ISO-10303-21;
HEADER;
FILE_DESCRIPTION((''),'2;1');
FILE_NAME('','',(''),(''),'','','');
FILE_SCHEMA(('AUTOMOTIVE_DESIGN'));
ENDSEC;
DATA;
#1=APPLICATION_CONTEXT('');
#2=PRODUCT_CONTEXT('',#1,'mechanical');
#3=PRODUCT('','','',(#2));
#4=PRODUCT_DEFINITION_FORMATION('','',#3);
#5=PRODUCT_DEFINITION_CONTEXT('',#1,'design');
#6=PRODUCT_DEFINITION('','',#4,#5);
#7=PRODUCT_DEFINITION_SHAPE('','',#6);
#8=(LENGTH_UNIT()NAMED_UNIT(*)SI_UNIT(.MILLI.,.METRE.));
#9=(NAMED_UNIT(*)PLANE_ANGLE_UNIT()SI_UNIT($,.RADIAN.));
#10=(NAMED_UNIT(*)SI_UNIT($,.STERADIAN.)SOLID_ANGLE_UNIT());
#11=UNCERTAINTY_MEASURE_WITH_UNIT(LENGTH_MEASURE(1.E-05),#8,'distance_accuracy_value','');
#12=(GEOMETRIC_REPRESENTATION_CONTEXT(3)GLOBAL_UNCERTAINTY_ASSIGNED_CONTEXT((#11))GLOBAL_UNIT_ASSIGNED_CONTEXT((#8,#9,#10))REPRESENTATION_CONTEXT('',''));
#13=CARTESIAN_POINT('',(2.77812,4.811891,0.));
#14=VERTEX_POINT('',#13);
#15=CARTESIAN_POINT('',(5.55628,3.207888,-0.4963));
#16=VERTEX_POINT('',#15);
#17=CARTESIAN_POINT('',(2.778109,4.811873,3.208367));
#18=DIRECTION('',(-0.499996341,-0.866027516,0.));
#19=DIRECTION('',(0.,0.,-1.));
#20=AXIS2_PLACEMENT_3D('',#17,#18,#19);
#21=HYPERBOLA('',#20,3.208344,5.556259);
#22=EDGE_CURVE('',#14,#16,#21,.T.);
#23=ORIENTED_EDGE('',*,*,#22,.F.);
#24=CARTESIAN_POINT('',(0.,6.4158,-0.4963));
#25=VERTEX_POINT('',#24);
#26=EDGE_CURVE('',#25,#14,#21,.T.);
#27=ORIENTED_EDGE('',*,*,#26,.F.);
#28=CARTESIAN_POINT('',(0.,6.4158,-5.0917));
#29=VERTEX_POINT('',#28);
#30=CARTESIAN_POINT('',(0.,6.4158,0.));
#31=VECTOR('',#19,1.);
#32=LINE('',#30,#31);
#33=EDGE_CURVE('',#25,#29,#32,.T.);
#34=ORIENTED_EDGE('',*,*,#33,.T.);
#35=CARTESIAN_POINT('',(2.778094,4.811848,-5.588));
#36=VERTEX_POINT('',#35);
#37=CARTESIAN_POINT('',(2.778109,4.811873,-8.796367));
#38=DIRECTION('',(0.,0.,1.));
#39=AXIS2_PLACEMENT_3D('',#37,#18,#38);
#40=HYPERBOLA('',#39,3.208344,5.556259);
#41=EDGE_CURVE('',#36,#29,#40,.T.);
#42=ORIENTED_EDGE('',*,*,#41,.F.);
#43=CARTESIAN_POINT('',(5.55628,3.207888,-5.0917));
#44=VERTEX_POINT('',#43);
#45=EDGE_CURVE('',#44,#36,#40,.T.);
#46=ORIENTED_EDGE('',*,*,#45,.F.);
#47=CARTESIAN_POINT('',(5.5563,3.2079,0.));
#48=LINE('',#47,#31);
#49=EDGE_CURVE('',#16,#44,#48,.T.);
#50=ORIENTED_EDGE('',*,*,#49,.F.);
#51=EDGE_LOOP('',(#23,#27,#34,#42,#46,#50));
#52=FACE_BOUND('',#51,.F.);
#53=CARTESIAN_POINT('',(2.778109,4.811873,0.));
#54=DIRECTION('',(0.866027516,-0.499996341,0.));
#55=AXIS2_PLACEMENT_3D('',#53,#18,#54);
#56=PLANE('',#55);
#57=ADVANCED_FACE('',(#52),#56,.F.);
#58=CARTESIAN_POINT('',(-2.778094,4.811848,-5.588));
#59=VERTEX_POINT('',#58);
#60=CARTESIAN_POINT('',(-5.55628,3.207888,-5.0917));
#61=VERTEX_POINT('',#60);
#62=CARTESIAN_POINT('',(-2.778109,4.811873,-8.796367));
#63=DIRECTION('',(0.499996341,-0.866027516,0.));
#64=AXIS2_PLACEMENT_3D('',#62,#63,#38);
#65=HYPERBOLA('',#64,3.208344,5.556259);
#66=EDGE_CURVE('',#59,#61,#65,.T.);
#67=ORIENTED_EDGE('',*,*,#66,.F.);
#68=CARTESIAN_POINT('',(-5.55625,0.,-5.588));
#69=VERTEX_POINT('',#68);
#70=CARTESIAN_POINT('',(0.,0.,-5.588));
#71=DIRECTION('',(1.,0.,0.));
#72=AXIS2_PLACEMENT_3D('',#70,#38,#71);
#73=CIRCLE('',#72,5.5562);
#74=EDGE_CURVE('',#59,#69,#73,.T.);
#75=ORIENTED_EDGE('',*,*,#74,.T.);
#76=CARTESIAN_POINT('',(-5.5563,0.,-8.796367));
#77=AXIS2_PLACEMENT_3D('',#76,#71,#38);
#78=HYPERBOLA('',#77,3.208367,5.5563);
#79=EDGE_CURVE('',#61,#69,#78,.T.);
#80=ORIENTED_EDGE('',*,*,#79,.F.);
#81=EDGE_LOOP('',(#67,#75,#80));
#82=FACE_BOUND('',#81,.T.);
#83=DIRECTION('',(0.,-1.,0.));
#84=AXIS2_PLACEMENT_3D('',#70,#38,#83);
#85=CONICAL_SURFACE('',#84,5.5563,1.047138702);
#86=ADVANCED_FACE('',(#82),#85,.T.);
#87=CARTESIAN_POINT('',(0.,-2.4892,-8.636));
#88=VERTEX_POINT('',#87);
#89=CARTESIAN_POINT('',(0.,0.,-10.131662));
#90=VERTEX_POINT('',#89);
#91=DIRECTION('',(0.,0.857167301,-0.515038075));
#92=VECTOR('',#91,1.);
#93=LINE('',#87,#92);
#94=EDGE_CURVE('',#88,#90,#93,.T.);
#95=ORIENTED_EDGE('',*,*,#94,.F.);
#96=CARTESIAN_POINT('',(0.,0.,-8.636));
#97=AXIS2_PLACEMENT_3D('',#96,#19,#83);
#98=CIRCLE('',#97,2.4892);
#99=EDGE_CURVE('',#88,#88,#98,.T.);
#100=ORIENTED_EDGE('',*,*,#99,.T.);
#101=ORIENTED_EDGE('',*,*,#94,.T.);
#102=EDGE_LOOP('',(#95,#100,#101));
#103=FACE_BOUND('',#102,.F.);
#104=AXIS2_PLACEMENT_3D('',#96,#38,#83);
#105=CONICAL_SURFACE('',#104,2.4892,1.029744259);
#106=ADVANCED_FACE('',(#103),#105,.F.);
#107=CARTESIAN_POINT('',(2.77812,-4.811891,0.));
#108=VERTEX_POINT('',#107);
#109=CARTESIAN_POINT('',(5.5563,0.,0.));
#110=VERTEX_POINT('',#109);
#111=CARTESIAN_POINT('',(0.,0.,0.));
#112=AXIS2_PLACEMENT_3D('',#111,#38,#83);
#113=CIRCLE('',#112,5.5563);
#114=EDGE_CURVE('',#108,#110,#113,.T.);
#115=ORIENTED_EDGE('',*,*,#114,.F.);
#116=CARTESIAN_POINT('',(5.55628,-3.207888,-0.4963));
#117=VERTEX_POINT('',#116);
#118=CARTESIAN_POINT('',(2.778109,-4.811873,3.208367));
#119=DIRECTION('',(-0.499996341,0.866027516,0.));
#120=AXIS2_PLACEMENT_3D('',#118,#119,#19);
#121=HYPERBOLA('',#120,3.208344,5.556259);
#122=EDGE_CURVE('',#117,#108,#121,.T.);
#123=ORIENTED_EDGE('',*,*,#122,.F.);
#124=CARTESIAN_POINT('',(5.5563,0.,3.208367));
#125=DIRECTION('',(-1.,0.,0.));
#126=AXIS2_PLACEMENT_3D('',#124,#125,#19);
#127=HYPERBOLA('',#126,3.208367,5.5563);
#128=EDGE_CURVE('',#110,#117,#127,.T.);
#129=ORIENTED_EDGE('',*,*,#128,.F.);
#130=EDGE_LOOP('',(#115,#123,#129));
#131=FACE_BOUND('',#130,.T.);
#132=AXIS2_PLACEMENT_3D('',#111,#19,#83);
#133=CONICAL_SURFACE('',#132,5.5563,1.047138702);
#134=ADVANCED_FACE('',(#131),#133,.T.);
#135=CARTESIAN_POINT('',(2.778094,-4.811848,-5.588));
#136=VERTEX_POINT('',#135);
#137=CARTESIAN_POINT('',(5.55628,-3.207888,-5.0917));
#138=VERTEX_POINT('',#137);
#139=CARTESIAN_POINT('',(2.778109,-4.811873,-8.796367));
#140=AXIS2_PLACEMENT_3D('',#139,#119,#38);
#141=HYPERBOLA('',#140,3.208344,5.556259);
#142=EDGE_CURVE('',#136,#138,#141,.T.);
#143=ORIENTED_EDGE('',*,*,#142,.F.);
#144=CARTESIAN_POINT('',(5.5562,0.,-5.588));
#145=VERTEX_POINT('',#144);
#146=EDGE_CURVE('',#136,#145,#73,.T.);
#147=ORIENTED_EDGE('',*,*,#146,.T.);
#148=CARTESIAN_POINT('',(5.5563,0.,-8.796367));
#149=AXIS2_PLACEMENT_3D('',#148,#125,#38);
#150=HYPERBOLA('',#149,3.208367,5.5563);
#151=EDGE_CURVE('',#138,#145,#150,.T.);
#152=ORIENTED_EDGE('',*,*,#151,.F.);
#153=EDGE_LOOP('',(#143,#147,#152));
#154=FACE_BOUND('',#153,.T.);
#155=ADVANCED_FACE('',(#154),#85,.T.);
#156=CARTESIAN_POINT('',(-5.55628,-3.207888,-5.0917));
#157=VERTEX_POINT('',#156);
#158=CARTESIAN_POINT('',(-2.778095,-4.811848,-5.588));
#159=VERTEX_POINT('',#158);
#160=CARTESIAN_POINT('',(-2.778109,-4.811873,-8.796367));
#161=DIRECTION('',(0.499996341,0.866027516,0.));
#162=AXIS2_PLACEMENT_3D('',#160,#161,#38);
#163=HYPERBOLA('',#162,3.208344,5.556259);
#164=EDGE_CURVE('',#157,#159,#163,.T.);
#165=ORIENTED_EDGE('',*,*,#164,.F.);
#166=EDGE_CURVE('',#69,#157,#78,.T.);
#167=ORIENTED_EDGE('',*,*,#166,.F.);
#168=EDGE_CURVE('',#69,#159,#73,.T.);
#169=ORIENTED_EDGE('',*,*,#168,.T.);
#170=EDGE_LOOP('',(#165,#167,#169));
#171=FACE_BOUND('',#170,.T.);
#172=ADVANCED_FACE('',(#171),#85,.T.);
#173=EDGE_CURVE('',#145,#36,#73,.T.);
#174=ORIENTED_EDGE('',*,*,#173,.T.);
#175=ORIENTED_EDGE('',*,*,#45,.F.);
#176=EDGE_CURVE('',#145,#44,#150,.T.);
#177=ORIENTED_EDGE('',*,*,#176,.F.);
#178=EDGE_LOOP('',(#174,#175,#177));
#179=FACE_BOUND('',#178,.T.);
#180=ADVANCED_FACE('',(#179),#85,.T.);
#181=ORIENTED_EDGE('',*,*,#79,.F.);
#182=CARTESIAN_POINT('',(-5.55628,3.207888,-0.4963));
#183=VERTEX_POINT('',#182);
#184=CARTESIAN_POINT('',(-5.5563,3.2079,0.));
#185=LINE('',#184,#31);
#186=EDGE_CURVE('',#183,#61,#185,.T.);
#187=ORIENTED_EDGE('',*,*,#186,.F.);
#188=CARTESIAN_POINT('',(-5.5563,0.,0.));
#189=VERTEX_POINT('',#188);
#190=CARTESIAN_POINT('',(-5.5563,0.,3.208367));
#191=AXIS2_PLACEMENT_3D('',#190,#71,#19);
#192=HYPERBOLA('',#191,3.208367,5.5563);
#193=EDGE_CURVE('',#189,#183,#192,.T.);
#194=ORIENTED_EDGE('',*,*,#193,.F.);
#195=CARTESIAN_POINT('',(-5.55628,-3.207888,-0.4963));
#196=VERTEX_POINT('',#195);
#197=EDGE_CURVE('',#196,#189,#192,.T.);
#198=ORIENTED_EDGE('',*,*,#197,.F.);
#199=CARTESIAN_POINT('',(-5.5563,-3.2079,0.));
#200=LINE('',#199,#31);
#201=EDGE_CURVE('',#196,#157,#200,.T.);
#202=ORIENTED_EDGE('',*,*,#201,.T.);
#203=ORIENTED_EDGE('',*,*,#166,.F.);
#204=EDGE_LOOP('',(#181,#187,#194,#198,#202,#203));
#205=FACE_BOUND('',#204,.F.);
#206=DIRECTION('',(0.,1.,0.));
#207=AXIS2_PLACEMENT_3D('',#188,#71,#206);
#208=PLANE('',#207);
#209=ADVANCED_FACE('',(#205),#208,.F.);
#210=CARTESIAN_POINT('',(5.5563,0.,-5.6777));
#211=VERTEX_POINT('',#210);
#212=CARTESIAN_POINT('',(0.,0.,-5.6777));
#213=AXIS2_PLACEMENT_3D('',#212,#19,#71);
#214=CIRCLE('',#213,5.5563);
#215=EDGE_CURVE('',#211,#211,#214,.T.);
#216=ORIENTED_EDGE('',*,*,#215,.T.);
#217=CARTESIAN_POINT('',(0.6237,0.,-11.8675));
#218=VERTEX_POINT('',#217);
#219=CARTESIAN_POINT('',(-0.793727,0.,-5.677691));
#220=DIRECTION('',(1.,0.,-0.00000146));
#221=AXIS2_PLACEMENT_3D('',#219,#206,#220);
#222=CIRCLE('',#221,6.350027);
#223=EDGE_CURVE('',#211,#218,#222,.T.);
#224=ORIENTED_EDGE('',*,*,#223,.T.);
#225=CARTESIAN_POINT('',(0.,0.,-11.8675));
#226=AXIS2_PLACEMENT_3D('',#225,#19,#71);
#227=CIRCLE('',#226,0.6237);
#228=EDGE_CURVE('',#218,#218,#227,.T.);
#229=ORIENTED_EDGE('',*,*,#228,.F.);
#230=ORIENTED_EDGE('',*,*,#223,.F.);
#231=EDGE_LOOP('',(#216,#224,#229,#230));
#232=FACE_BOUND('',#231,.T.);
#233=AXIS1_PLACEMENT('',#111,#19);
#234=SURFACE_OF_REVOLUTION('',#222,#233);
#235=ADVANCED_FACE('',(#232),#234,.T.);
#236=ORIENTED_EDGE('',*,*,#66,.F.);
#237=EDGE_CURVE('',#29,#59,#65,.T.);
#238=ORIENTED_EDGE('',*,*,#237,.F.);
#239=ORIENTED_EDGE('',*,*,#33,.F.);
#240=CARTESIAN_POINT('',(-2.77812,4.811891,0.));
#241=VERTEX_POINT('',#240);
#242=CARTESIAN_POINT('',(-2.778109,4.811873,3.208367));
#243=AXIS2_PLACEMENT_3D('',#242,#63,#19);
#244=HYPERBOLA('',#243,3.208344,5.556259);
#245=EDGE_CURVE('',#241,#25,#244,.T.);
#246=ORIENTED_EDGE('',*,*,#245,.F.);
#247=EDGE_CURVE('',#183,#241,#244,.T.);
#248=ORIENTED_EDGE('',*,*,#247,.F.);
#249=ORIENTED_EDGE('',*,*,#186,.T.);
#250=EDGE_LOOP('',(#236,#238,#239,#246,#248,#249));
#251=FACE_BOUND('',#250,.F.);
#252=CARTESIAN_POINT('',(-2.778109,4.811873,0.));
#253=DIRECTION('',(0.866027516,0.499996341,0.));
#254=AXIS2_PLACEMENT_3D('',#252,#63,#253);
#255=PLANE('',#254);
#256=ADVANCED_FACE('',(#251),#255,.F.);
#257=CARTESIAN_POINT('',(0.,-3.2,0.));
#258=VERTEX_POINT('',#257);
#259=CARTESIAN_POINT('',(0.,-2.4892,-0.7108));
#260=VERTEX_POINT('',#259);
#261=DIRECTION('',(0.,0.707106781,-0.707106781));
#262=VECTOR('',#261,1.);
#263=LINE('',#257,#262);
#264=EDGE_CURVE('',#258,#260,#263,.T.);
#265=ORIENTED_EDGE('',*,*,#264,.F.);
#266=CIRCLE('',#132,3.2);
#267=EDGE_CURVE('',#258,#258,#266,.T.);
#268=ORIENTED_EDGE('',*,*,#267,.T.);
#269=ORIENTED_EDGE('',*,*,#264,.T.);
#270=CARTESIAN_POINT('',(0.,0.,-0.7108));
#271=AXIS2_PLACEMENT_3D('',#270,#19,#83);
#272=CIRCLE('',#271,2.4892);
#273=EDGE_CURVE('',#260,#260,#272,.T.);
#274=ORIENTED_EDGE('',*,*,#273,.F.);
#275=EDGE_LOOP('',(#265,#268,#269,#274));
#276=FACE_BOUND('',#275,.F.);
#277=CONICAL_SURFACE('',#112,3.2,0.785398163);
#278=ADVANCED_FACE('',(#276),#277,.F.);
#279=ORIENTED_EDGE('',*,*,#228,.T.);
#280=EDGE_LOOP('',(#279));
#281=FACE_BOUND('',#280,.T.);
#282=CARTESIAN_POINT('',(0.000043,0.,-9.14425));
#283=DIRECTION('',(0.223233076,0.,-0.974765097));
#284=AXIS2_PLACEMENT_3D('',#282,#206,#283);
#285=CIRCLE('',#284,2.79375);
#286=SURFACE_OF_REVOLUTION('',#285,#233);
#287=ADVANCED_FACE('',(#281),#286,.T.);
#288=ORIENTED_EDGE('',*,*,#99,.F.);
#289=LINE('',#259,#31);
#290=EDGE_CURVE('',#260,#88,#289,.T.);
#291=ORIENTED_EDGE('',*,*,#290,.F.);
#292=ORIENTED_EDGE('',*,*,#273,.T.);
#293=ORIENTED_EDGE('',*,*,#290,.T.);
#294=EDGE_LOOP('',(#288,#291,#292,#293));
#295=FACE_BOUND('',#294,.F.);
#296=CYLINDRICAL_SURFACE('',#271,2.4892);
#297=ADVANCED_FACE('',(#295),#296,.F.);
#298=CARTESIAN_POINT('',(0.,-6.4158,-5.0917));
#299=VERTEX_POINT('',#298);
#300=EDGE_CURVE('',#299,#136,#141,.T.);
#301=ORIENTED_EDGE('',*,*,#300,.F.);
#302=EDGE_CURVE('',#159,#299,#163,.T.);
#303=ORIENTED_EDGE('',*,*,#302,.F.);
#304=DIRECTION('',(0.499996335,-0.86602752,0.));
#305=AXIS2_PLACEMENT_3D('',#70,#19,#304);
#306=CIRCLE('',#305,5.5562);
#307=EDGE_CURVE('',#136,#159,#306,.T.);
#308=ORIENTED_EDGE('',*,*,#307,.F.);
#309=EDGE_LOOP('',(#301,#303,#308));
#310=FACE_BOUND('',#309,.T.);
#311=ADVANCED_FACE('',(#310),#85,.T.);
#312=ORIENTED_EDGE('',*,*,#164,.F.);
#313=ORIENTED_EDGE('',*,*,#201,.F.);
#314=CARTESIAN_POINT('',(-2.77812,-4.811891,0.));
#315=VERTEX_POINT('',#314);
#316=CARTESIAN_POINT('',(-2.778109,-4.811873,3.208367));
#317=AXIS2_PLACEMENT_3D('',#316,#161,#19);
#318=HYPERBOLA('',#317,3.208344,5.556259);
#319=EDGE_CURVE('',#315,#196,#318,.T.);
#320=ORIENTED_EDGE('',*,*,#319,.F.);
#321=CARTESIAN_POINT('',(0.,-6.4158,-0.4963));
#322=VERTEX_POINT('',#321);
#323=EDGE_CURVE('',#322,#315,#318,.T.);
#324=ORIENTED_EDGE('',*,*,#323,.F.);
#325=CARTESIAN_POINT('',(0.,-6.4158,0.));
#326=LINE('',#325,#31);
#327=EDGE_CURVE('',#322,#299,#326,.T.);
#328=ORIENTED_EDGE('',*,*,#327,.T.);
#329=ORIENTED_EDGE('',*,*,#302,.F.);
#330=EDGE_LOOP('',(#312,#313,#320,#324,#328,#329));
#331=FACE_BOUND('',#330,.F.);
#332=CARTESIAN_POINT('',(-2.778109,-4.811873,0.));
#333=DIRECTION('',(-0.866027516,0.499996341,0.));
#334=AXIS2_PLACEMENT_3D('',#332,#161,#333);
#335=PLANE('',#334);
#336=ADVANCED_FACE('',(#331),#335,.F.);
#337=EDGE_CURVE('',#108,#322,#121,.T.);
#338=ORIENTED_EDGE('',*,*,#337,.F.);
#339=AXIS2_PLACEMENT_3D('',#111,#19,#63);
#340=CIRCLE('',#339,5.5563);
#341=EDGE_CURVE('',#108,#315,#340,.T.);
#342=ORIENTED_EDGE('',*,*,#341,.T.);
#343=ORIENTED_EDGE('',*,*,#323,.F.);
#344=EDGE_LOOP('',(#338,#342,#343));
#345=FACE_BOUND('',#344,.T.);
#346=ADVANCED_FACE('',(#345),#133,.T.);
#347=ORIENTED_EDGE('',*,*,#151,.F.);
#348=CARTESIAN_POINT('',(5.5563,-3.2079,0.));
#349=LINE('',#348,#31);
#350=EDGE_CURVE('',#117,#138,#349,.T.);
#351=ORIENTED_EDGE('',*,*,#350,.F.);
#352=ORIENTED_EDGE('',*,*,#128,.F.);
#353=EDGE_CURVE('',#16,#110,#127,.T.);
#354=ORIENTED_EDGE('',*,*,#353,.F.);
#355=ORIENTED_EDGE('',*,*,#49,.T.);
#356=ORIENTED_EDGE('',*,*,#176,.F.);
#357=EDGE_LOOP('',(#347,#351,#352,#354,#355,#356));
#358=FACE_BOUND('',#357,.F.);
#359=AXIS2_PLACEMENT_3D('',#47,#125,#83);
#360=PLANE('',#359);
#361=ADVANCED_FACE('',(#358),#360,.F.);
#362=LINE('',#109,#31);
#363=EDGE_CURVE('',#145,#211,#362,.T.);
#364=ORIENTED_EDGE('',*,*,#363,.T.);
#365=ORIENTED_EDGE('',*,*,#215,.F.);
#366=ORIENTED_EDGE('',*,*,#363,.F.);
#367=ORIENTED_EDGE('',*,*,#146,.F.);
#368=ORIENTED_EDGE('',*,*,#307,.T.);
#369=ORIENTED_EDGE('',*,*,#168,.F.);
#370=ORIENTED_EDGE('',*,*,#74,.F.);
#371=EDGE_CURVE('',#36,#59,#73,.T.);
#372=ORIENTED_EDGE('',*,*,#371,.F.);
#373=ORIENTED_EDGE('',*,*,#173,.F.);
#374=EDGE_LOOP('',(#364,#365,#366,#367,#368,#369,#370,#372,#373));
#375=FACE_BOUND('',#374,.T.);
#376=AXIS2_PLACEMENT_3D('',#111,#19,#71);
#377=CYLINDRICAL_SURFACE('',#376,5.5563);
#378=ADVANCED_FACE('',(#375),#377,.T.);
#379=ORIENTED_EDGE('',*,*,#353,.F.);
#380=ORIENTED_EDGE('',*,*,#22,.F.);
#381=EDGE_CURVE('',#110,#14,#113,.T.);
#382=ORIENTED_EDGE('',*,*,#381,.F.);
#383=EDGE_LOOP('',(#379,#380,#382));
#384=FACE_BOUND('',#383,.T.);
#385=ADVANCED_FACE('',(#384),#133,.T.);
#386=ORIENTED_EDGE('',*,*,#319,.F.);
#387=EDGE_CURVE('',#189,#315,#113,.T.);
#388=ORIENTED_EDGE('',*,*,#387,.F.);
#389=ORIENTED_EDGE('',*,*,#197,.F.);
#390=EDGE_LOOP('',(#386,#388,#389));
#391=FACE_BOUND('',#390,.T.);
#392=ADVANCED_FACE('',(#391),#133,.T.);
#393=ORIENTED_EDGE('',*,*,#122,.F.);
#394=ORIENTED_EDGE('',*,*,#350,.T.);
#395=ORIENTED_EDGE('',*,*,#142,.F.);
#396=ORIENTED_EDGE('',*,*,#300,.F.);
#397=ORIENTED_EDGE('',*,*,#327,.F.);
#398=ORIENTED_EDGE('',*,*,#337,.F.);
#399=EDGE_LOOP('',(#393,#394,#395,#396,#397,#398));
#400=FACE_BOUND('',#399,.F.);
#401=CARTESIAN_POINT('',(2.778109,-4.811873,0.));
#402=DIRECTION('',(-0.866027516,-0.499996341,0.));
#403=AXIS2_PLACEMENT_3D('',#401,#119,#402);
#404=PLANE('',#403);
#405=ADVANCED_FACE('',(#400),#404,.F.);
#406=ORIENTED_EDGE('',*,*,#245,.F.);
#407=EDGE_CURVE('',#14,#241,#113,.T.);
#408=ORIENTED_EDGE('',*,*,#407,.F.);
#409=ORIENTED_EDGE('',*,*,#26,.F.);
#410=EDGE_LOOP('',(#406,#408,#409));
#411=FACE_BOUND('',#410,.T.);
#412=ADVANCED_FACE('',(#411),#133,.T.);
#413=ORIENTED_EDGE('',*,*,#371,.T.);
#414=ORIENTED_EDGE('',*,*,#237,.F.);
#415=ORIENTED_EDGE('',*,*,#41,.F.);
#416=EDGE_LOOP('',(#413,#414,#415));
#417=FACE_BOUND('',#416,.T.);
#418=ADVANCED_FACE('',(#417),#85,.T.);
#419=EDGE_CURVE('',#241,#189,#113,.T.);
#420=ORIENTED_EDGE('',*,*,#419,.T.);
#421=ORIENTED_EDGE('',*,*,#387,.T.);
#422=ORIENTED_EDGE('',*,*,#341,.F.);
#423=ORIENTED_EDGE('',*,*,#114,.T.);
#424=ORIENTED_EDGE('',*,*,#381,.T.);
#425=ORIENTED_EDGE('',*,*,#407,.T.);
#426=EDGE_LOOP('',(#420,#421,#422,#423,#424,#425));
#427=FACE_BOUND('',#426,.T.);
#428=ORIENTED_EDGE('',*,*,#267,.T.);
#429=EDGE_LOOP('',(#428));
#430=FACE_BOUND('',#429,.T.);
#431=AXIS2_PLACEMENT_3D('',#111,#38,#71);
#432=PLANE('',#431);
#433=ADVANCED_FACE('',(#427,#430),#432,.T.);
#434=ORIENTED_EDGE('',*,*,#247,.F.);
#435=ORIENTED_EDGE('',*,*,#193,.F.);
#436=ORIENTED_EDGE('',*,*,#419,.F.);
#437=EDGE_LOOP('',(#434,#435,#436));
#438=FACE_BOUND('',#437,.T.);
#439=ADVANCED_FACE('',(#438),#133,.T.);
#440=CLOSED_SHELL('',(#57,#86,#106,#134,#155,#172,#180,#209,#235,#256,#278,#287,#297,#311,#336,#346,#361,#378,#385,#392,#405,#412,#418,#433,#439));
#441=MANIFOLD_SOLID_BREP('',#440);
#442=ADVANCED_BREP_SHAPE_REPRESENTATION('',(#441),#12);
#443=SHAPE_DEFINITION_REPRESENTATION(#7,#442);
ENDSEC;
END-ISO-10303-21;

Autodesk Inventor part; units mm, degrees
ref_plane "YZ Plane" through (0, 0, 0) normal (1, 0, 0) x (0, 1, 0)
sketch "Sketch2" plane through (0, 0, 0) normal (0, 1, 0) x (-1, 0, 0)
  line L0 (0, 0) -> (-5.5563, 0)
  line L1 (-5.5563, 0) -> (-5.5563, -5.6777)
  arc A0 (-5.5563, -5.6777) -> (-0.6237, -11.8675) centre (0.7937, -5.6777) ccw
  arc A1 (-0.6237, -11.8675) -> (0, -11.938) centre (0, -9.144) ccw
  line L2 (0, 0) -> (0, -11.938)
  line L3 (0, 0) -> (0, -11.938)
  dimension "d1" = 11.938
  dimension "d3" = 5.5563
  dimension "d5" = 0
  dimension "d7" = 2.794
  dimension "d9" = 6.35
revolve "Revolution1" add sketch "Sketch2" angle 360 about axis through (0, 0, 0) along (0, 0, -1)
sketch "Sketch7" plane through (0, 0, 0) normal (0, 0, 1) x (1, 0, 0)
  line L0 (-5.5563, -3.2079) -> (-5.5563, 3.2079)
  line L1 (-5.5563, 3.2079) -> (0, 6.4158)
  line L2 (0, 6.4158) -> (5.5563, 3.2079)
  line L3 (5.5563, 3.2079) -> (5.5563, -3.2079)
  line L4 (5.5563, -3.2079) -> (0, -6.4158)
  line L5 (0, -6.4158) -> (-5.5563, -3.2079)
  circle A0 centre (0, 0) radius 5.5562 projected
extrude "Extrusion1" add sketch "Sketch7" against normal blind 5.588 contours L0 A0 L5 | L0 L1 A0 | A0 L4 L5 | L1 L2 A0 | A0 L3 L4 | L2 L3 A0
sketch "Sketch9" plane through (0, 0, 0) normal (1, 0, 0) x (0, 1, 0)
  line L0 (-6.4158, -5.0917) -> (-6.4158, -5.588)
  line L1 (-6.4158, -5.588) -> (-5.5563, -5.588)
  line L2 (-5.5563, -5.588) -> (-6.4158, -5.0917)
  line L3 (0, -5.6873) -> (0, -4.9925) projected
  point P0 (-6.4158, -5.588)
  dimension "d53" = 11.1125
  dimension "d54" = 30
revolve "Revolution2" cut sketch "Sketch9" angle 360 about axis through (0, 0, -10) along (0, 0, 1)
sketch "Sketch11" plane through (-5.5563, -3.2079, 0) normal (0, 0, 1) x (1, 0, 0)
  line L0 (5.5562, -3.2079) -> (0, 0) projected
  line L1 (11.1125, 6.4158) -> (11.1125, 0) projected
  line L2 (5.5563, 9.6237) -> (5.5562, -3.2079) construction
  line L3 (0, 6.4158) -> (11.1125, 0) construction
  point P0 (5.5563, 3.2079)
hole "Hole1" at (0, 0, 0) direction (0, 0, -1) diameter 4.9784 depth 8.636 tip angle 118 countersink diameter 6.4 countersink angle 90 thread size "1/4-20 UNC" class "2B" standard "ANSI Unified Screw Threads"
sketch "Sketch8" plane through (0, 0, 0) normal (1, 0, 0) x (0, 1, 0)
  line L0 (-6.4158, -0.4963) -> (-6.4158, 0)
  line L1 (-6.4158, 0) -> (-5.5563, 0)
  line L2 (-5.5563, 0) -> (-6.4158, -0.4963)
  line L3 (0, -0.5955) -> (0, 0.0993) projected
  point P0 (-6.4158, 0)
  dimension "d49" = 11.1125
  dimension "d50" = 30
revolve "Revolution3" cut sketch "Sketch8" angle 360 about axis through (0, 0, -10) along (0, 0, 1)
ref_plane "MSC_PF1" through (0, 0, 0) normal (1, 0, 0) x (0, 1, 0)
ref_plane "MSC_PT1" through (0, 0, 0) normal (0, 0, 1) x (1, 0, 0)
equation "\"d47\" = q"
equation "\"d76\" = PTC + NND"
equation "\"d79\" = tt"
equation "\"d1\" = ParH"
equation "\"d3\" = 0.5 * ParF"
equation "\"d7\" = r"
equation "\"d9\" = ParS"
equation "\"d49\" = ParF"
equation "\"d53\" = ParF"
equation "\"NND\" = 6.35"
equation "\"ParF\" = 11.1125"
equation "\"g1\" = 12.827"
equation "\"ParH\" = 11.938"
equation "\"q\" = 5.588"
equation "\"r\" = 2.794"
equation "\"ParS\" = 6.35"
equation "\"tt\" = 8.636"
equation "\"THREADDIA\" = NND"
equation "\"PTC\" = 0.05"
properties part number "ANSI B 18.2.2 - 1/4-20" material "Steel, Mild"
